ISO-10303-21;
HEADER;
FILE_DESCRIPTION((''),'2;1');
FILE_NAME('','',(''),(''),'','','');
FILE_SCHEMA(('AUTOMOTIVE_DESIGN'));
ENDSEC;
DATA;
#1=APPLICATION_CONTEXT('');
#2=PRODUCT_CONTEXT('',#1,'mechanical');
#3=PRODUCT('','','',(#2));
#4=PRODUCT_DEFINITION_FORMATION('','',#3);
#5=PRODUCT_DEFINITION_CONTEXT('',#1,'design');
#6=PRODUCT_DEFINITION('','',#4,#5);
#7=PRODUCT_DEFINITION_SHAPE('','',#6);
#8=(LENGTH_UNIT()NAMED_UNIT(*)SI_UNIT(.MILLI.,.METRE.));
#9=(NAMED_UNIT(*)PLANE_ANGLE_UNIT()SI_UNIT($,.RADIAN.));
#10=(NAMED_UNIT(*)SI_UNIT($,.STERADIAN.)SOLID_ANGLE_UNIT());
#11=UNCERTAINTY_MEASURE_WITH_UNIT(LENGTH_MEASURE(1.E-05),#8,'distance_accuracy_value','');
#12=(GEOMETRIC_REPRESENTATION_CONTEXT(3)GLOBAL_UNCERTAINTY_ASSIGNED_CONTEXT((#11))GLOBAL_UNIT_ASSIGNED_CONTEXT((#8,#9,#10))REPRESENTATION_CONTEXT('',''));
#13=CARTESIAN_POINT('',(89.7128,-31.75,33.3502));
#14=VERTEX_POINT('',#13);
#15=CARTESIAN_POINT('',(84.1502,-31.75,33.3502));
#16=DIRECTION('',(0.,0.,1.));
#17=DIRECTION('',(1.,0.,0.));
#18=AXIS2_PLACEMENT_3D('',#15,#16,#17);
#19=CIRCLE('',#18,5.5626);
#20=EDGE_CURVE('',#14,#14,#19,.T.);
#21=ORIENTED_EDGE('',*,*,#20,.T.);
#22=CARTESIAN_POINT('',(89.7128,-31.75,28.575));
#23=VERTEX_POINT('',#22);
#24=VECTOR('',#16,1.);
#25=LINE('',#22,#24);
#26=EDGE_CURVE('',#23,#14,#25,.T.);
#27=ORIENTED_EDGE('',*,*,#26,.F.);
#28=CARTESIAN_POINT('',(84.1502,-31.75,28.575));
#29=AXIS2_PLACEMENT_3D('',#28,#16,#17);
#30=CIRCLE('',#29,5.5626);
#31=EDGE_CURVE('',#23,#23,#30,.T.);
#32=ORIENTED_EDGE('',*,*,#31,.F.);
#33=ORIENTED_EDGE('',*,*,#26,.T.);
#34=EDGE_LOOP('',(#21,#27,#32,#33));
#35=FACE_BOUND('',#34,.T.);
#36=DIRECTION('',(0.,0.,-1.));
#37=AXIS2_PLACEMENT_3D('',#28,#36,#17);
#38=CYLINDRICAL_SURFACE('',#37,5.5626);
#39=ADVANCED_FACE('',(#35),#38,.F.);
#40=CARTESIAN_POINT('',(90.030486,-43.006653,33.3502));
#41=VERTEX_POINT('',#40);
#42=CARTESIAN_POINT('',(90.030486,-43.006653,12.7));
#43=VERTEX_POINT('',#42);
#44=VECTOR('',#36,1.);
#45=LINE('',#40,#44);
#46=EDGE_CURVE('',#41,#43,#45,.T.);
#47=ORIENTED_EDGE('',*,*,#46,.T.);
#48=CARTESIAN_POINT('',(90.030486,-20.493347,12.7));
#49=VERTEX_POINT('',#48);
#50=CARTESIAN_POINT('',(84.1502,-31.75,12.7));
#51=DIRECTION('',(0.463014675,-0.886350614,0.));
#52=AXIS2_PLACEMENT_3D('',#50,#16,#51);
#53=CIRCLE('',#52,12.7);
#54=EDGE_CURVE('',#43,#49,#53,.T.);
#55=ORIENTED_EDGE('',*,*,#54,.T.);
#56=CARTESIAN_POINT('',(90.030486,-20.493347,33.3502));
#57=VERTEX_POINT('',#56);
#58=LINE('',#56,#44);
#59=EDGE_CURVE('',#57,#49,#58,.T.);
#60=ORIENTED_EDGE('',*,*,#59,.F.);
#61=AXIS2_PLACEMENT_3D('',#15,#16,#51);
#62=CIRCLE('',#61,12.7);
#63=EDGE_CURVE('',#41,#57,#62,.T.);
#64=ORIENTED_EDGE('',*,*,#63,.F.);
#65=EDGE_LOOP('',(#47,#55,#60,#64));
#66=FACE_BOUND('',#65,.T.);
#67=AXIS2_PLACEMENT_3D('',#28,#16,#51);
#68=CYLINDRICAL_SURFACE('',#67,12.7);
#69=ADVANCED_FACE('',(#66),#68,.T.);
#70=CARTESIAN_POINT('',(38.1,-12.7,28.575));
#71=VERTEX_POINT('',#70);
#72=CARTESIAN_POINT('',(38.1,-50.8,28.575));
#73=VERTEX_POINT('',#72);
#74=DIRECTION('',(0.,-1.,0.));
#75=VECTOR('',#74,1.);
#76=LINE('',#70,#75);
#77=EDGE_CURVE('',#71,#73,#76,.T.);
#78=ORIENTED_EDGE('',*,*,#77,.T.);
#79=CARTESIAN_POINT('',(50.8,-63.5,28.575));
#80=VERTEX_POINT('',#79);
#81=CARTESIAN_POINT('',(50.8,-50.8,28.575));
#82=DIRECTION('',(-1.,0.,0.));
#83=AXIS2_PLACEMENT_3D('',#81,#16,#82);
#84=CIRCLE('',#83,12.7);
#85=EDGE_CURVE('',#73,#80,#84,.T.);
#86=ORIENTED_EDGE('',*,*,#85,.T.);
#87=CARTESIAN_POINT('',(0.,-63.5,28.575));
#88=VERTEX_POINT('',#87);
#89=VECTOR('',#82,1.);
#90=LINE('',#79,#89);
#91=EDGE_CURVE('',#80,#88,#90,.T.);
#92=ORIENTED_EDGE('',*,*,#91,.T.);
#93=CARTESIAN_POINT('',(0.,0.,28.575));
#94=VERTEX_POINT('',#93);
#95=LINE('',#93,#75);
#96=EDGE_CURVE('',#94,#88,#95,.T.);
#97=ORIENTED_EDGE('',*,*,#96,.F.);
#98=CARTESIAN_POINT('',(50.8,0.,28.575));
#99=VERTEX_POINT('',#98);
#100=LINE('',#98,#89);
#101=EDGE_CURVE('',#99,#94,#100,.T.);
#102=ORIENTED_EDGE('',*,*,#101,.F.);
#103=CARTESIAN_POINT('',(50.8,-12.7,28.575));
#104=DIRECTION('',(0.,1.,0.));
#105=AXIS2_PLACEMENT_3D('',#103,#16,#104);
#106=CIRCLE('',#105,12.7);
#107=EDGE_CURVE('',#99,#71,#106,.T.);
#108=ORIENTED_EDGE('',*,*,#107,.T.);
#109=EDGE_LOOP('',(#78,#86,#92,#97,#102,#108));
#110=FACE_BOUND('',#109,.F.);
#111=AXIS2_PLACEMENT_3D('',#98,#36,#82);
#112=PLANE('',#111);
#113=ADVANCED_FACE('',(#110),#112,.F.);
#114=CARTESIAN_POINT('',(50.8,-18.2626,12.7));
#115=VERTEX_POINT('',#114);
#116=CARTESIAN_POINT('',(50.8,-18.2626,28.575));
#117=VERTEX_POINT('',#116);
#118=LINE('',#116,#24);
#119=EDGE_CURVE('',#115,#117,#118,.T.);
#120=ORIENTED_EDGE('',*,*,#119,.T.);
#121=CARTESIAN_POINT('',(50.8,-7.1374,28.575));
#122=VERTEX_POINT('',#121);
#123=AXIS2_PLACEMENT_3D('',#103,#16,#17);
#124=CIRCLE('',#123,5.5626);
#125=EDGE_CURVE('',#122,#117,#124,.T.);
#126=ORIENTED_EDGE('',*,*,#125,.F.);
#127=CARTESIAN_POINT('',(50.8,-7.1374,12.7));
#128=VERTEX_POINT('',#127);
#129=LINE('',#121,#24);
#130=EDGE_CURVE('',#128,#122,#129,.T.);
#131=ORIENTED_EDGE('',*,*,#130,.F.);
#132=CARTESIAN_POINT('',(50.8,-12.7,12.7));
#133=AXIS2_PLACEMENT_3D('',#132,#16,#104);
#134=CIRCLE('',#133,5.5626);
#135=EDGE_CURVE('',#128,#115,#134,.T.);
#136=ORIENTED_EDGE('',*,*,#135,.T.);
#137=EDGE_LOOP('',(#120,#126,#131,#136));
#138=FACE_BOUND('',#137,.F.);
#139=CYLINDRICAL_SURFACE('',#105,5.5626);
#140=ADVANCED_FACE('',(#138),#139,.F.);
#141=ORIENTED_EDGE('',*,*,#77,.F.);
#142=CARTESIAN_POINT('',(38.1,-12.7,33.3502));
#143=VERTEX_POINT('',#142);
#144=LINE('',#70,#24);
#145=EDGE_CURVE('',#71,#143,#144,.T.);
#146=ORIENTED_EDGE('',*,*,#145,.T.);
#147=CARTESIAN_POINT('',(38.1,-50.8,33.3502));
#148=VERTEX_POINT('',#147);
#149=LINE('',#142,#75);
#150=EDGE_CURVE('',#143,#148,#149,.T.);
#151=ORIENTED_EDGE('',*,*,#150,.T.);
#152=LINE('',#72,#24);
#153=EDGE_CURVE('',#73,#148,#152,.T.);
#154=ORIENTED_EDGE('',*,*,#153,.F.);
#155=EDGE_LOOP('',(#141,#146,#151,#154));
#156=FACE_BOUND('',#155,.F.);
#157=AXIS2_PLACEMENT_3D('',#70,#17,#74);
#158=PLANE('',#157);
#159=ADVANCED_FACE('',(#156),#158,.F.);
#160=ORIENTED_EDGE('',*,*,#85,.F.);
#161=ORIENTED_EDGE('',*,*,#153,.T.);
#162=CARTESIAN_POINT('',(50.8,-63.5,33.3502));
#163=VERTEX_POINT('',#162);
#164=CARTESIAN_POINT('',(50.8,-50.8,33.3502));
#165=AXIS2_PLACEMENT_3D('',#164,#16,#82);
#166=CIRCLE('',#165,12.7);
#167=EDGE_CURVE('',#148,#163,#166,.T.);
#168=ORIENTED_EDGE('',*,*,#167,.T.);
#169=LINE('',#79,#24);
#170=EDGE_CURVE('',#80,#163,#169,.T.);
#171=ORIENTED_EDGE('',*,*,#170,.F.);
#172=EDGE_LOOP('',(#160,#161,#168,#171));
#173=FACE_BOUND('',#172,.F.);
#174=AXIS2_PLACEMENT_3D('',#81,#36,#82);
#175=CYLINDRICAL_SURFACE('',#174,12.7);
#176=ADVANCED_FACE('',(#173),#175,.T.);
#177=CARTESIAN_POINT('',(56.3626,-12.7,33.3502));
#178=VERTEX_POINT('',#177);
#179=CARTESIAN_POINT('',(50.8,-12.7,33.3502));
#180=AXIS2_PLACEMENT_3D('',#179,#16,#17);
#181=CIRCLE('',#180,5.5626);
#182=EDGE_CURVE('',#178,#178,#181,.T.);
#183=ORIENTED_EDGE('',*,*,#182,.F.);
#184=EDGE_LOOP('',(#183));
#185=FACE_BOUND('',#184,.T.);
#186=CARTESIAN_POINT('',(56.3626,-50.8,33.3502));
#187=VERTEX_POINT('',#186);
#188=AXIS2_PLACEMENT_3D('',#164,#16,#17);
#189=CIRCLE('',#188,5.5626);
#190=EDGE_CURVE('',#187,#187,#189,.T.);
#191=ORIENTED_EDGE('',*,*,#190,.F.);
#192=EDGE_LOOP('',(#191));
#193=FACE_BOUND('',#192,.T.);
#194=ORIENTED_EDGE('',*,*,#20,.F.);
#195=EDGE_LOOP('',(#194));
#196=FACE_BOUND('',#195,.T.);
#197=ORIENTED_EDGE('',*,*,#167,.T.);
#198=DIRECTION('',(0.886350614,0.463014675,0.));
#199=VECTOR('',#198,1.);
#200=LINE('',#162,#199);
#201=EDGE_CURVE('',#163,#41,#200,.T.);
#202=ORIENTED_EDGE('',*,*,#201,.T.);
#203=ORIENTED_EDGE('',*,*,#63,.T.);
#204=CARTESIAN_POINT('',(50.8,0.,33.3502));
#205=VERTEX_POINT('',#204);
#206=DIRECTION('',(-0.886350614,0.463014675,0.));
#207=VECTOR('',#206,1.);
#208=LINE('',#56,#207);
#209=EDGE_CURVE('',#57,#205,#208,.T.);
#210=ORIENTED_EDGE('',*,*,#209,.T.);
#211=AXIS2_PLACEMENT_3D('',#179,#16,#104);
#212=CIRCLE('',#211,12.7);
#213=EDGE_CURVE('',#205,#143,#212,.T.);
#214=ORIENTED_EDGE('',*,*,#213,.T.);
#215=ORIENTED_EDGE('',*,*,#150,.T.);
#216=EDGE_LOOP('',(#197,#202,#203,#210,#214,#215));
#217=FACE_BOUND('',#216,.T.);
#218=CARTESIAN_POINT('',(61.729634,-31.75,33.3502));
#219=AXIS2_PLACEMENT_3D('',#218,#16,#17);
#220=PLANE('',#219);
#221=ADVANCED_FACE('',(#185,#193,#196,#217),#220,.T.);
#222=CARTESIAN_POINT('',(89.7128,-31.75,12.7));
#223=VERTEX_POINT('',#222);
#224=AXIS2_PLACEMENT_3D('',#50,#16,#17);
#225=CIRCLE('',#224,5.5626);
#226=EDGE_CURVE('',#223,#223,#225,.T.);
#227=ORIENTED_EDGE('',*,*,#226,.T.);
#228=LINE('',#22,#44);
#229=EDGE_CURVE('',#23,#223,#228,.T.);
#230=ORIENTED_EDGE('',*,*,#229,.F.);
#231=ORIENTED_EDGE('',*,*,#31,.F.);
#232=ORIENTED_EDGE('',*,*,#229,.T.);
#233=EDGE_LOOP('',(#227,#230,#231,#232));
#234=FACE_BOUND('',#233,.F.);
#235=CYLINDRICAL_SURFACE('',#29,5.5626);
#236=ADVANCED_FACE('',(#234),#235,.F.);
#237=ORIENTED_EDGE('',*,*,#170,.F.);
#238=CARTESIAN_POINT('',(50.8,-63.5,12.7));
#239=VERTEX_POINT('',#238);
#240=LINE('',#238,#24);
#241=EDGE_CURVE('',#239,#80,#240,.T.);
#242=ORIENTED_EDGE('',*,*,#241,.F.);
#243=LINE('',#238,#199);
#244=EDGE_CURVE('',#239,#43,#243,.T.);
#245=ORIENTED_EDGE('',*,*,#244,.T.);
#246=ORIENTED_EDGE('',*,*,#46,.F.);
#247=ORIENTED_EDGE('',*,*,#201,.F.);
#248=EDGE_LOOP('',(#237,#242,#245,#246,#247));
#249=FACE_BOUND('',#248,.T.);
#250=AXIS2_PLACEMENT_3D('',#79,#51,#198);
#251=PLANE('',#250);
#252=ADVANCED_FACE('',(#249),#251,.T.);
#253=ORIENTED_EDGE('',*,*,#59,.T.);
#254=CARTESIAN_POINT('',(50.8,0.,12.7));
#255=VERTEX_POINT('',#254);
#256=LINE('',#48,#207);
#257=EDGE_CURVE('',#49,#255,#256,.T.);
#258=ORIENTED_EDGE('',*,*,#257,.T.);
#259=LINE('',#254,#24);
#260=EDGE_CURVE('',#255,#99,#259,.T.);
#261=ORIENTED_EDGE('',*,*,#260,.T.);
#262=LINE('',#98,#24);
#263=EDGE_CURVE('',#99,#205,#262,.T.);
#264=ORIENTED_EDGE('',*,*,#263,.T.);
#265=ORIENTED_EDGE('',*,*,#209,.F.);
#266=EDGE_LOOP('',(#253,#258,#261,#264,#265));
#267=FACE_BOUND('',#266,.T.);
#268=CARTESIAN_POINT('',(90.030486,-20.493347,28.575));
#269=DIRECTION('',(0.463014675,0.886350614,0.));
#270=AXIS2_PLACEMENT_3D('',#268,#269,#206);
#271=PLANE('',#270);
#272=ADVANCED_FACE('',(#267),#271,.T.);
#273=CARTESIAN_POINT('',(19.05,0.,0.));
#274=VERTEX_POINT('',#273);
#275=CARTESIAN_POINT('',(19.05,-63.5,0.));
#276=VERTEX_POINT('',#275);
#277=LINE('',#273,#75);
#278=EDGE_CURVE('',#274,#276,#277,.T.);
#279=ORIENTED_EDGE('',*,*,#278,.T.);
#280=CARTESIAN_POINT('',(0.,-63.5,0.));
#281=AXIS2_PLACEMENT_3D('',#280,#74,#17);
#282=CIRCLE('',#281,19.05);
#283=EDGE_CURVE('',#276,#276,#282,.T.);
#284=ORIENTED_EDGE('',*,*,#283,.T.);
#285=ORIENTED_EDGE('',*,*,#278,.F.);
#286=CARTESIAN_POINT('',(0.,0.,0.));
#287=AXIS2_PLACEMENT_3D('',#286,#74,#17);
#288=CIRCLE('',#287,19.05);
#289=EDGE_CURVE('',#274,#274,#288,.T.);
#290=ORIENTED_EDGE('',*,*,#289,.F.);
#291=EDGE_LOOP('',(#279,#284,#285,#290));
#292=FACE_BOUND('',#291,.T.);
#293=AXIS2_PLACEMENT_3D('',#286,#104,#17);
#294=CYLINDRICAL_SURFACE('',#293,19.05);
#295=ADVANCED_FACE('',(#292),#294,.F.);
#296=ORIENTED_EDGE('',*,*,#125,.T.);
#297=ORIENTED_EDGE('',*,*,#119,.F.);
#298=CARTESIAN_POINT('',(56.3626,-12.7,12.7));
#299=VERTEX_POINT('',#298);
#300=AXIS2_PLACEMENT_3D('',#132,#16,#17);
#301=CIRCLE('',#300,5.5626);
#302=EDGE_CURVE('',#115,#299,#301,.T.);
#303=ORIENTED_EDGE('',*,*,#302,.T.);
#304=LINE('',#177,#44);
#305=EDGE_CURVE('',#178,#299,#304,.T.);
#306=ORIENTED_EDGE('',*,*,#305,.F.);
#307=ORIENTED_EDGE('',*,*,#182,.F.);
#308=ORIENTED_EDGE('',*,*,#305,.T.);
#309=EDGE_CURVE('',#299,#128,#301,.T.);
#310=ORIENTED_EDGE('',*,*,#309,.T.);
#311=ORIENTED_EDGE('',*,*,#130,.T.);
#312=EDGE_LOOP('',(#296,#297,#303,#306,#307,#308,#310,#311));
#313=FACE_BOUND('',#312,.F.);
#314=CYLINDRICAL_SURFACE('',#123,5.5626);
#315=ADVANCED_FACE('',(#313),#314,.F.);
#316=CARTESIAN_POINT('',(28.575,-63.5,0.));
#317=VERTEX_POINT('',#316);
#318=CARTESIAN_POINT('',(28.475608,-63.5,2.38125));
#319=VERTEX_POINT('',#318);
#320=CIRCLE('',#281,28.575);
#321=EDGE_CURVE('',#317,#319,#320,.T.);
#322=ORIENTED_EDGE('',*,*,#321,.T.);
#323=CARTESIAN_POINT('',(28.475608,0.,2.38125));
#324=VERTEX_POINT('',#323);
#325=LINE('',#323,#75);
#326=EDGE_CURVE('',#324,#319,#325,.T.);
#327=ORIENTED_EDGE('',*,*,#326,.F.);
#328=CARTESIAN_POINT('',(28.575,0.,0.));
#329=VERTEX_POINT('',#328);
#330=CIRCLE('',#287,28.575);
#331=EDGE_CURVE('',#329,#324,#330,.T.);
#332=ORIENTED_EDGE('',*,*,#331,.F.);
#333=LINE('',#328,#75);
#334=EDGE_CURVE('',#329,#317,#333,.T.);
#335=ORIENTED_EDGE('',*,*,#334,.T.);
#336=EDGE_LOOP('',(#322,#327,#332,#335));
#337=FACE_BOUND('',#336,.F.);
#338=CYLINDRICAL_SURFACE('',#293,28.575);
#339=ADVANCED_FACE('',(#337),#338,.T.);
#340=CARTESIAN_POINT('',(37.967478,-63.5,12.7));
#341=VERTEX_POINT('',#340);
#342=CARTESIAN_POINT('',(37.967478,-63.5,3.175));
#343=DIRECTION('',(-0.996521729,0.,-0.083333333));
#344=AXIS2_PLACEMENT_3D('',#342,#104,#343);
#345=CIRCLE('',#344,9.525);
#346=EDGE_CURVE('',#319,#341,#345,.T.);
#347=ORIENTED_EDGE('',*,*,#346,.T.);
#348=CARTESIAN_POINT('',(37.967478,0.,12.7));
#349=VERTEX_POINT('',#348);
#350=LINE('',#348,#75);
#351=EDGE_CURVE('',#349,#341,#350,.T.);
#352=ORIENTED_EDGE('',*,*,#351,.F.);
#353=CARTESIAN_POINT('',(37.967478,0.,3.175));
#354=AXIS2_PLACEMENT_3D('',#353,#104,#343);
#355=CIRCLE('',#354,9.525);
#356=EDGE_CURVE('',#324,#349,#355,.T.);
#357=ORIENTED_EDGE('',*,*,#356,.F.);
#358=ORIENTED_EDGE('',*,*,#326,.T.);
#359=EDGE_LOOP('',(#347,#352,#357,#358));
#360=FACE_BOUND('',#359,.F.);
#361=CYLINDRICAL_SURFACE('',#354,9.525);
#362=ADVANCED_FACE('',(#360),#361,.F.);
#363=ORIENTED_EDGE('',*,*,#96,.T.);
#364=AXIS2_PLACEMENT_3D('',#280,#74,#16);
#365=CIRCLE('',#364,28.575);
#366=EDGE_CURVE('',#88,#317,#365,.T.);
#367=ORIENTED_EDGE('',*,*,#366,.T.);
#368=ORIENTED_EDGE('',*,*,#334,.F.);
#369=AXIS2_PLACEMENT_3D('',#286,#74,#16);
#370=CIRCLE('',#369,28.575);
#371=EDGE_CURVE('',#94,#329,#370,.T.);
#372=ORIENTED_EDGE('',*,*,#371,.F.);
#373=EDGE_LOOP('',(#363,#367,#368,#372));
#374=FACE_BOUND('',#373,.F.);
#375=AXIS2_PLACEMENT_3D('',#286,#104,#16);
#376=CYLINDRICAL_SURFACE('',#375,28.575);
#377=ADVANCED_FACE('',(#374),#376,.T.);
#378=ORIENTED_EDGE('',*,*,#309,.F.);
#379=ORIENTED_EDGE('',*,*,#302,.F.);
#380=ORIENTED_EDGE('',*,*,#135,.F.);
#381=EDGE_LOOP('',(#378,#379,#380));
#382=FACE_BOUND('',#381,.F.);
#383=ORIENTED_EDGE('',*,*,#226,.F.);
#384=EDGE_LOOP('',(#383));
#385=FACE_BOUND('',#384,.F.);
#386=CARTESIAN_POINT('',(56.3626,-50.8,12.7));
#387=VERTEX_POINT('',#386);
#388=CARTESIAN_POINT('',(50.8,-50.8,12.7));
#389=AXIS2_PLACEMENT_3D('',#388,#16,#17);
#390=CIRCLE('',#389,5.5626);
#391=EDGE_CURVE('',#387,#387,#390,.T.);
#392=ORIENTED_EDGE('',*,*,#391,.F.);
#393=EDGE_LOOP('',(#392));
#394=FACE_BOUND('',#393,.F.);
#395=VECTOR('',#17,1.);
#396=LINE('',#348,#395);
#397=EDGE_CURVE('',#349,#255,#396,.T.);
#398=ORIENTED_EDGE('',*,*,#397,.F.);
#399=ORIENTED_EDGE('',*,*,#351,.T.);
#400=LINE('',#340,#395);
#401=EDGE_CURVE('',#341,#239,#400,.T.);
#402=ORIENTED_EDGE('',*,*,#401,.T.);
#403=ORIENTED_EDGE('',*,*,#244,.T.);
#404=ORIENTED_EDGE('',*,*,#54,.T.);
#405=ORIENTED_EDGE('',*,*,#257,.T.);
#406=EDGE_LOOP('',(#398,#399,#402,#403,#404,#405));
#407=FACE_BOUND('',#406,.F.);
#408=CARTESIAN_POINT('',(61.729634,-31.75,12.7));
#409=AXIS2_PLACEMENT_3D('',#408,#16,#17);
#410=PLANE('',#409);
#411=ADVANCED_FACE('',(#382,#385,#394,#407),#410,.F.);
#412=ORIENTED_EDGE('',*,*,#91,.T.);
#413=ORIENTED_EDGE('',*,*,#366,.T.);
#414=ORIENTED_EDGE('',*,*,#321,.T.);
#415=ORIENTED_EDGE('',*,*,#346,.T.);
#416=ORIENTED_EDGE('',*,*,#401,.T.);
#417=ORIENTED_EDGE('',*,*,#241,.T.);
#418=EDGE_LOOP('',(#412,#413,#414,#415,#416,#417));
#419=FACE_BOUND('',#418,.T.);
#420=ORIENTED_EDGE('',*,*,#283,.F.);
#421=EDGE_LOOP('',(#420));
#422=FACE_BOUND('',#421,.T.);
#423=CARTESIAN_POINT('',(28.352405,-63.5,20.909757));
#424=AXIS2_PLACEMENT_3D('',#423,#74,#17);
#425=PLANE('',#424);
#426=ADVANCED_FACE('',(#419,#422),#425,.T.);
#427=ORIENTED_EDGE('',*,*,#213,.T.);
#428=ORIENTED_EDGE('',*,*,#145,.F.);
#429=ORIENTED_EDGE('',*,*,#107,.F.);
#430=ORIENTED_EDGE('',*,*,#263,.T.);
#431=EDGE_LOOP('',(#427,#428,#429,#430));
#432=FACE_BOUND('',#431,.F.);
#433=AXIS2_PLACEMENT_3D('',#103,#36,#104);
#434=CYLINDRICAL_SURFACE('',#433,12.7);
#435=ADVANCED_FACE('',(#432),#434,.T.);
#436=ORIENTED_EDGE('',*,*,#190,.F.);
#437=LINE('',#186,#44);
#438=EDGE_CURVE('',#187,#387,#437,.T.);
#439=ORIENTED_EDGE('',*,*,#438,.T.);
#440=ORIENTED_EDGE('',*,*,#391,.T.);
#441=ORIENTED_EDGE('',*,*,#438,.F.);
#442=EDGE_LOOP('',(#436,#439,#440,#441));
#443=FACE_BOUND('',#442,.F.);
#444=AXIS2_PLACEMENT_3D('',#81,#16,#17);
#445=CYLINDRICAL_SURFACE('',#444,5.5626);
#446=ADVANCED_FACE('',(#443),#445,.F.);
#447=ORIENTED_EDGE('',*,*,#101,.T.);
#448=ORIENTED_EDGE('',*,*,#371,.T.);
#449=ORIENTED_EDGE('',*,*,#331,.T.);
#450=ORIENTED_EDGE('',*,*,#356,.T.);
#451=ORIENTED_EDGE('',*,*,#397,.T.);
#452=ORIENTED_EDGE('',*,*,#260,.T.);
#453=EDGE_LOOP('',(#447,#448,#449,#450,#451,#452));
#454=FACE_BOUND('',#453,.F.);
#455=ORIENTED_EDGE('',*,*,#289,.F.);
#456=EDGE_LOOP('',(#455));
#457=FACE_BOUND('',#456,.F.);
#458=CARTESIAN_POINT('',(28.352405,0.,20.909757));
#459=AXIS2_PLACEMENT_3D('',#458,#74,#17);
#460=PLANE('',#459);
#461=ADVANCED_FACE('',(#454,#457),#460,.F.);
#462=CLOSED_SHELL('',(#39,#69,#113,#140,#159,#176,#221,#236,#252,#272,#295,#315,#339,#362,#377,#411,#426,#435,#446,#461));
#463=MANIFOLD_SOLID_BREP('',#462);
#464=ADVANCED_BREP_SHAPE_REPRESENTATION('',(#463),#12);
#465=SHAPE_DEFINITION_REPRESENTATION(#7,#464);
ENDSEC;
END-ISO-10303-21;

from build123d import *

# Parameters (mm, degrees)
F0_R          = 19.05
F1_DEPTH      = 63.5
F2_R          = 5.5626
F3_DEPTH      = 4.7752
F3_DEPTH_BACK = 15.875
F4_DEPTH      = 57.151


with BuildPart() as f1:
    # F0 (on Front) → F1 (new body)
    with BuildSketch(Plane.XZ):
        with BuildLine():
            ThreePointArc((0, 28.575), (19.345366451, 21.0306305629), (28.4756083945, 2.38125))
            ThreePointArc((28.4756083945, 2.38125), (30.9572676717, 9.6234554837), (37.9674778593, 12.7))
            Line((37.9674778593, 12.7), (50.8, 12.7))
            Line((50.8, 12.7), (50.8, 28.575))
            Line((50.8, 28.575), (0, 28.575))
        make_face()
        with BuildLine():
            ThreePointArc((0, 28.575), (-20.2055762724, -20.2055762724), (28.575, 0))
            ThreePointArc((28.575, 0), (28.5501412858, 1.1916616816), (28.4756083945, 2.38125))
            ThreePointArc((28.4756083945, 2.38125), (19.345366451, 21.0306305629), (0, 28.575))
        make_face()
        Circle(F0_R, mode=Mode.SUBTRACT)
    extrude(amount=F1_DEPTH)

    # F2 (on face) → F3 (join, two sides)
    with BuildSketch(Plane.XY.offset(28.575)) as f3_sk:
        with BuildLine():
            Line((90.0304863666, -20.4933472006), (50.8, 0))
            ThreePointArc((50.8, 0), (41.8197438789, -3.7197438789), (38.1, -12.7))
            Line((38.1, -12.7), (38.1, -50.8))
            ThreePointArc((38.1, -50.8), (41.8197438789, -59.7802561211), (50.8, -63.5))
            Line((50.8, -63.5), (90.0304863666, -43.0066527994))
            ThreePointArc((90.0304863666, -43.0066527994), (96.8502, -31.75), (90.0304863666, -20.4933472006))
        make_face()
        with Locations((50.8, -50.8)):
            Circle(F2_R, mode=Mode.SUBTRACT)
        with Locations((50.8, -12.7)):
            Circle(F2_R, mode=Mode.SUBTRACT)
        with Locations((84.1502, -31.75)):
            Circle(F2_R, mode=Mode.SUBTRACT)
    extrude(amount=F3_DEPTH)
    extrude(f3_sk.sketch, amount=-F3_DEPTH_BACK)

    # F2 (on face) → F4 (cut, through all)
    with BuildSketch(Plane.XY.offset(28.575)):
        with BuildLine():
            Line((50.8, -18.2626), (50.8, -7.1374))
            ThreePointArc((50.8, -7.1374), (45.2374, -12.7), (50.8, -18.2626))
        make_face()
        with BuildLine():
            Line((50.8, -56.3626), (50.8, -45.2374))
            ThreePointArc((50.8, -45.2374), (45.2374, -50.8), (50.8, -56.3626))
        make_face()
    extrude(amount=-F4_DEPTH, mode=Mode.SUBTRACT)


solid = f1.part
